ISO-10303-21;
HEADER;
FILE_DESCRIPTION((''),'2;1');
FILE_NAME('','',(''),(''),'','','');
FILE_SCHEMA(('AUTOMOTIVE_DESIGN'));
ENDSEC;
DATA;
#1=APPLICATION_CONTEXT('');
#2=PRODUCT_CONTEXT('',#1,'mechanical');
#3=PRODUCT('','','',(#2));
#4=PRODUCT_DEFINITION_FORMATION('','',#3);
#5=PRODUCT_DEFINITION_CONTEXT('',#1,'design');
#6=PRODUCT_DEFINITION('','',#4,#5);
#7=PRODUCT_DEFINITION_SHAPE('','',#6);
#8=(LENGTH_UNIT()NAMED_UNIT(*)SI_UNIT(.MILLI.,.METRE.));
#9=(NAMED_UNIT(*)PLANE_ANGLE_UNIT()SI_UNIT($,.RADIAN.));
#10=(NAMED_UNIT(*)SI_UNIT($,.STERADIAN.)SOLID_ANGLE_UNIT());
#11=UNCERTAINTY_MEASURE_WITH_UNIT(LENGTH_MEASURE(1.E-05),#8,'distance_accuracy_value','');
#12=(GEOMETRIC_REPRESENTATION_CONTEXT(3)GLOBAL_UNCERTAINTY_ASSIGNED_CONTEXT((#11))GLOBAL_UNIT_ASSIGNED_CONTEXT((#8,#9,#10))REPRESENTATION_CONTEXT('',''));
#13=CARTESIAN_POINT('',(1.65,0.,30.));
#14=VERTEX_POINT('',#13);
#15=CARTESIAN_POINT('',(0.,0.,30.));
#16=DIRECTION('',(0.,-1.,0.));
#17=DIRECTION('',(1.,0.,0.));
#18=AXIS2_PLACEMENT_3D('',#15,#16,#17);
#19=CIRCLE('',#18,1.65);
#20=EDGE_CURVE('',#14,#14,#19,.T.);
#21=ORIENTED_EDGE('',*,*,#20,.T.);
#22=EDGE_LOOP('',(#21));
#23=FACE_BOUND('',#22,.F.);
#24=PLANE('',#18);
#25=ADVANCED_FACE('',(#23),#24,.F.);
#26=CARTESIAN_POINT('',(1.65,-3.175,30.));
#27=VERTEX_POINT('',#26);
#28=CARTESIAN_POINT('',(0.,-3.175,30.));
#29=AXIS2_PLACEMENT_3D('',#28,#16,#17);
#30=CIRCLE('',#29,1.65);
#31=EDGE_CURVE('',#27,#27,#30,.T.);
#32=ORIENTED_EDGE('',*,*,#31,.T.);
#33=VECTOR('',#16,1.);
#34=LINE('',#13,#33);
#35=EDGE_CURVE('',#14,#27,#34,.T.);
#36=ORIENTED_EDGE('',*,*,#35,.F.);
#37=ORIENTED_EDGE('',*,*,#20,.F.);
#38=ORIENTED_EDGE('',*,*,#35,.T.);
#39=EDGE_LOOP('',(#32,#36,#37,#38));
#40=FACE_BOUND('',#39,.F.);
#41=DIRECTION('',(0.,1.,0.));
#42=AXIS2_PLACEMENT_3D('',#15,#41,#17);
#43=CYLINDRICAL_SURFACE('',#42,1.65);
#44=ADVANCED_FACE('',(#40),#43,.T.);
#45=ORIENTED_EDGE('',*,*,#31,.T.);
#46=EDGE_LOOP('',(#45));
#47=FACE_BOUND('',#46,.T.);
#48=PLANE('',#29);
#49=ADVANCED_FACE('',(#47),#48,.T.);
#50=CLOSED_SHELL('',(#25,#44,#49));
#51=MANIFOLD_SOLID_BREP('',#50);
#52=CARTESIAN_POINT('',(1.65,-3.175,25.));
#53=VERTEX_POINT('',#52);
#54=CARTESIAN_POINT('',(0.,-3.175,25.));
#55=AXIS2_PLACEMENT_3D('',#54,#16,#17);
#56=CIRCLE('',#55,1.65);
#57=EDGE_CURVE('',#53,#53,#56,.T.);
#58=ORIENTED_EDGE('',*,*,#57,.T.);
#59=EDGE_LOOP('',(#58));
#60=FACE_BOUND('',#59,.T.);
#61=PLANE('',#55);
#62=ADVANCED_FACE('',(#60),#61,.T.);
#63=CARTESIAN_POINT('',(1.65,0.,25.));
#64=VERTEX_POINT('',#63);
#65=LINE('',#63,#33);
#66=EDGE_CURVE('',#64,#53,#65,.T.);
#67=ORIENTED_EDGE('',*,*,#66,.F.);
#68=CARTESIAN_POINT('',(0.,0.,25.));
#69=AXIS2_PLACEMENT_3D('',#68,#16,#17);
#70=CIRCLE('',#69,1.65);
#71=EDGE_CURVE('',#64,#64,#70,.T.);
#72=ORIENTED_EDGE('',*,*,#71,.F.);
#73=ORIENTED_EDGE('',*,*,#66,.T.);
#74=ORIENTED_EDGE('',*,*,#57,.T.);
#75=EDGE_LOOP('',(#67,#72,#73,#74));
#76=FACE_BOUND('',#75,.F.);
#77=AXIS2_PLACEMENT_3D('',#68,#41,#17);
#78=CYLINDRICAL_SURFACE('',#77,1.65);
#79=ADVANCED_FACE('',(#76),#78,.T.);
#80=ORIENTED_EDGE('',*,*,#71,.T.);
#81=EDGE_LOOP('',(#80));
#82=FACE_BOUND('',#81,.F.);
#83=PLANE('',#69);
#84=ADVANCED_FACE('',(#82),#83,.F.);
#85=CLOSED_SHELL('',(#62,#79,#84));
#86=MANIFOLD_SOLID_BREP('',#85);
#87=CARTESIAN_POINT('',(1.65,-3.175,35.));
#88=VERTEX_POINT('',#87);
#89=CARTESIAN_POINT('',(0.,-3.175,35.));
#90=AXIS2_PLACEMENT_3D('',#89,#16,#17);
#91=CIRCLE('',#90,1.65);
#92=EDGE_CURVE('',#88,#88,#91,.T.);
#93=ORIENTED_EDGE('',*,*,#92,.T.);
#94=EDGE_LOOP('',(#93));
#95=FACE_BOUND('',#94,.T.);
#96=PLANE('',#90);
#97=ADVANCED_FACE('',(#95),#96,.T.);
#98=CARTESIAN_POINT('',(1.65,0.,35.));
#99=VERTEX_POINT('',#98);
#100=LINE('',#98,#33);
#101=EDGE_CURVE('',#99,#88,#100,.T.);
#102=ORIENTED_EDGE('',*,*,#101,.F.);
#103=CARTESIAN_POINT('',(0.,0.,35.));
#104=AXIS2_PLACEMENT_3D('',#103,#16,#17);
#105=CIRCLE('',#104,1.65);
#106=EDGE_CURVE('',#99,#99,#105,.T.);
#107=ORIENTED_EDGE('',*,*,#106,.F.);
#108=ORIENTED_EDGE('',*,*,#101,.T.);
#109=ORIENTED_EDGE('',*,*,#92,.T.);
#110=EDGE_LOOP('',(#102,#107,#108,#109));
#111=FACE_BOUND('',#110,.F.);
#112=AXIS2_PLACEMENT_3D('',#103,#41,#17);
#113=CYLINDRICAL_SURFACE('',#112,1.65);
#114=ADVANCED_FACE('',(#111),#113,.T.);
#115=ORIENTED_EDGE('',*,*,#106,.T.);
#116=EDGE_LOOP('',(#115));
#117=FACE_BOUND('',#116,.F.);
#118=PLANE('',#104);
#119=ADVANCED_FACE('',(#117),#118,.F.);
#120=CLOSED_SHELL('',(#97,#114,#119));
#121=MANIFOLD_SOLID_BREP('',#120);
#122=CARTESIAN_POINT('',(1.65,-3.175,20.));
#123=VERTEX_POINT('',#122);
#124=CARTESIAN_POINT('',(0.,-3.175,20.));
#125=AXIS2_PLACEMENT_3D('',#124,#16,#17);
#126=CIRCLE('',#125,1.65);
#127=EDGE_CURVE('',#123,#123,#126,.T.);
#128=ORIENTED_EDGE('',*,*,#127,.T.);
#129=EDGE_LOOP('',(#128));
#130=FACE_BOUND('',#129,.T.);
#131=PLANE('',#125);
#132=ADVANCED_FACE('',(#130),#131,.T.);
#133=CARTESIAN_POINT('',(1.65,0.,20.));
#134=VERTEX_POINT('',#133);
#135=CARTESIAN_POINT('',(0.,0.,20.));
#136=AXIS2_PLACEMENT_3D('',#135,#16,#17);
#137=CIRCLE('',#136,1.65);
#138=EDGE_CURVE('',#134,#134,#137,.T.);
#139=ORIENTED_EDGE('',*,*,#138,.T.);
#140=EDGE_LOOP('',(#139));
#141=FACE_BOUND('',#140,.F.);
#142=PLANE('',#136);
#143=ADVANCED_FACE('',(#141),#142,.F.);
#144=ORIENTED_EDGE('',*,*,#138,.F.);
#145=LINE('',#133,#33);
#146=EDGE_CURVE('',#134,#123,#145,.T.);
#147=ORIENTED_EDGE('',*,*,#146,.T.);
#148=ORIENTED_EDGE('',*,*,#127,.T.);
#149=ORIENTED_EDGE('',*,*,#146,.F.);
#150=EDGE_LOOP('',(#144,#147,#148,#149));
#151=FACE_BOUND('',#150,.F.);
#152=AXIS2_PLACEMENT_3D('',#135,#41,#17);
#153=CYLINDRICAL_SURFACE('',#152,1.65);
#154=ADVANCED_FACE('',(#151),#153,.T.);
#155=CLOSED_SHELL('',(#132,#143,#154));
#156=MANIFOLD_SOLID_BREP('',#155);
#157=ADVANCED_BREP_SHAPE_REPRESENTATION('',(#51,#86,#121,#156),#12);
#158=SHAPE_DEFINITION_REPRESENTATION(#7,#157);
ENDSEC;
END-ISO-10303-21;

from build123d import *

# Parameters (mm, degrees)
F0_R     = 1.65
F1_DEPTH = 3.175


# Not quite as in the source:
# - a length typed as a fraction of an inch, garbled in the dataset ("3 / 203.2 mm" for 3/8 in), is restored


with BuildPart() as f1:
    # F0 (on Front) → F1 (new body)
    with BuildSketch(Plane.XZ):
        with Locations((0, 35)):
            Circle(F0_R)
    extrude(amount=F1_DEPTH)


with BuildPart() as f1b:
    # F0 (on Front) → F1, piece 2 (new body)
    with BuildSketch(Plane.XZ):
        with Locations((0, 30)):
            Circle(F0_R)
    extrude(amount=F1_DEPTH)


with BuildPart() as f1c:
    # F0 (on Front) → F1, piece 3 (new body)
    with BuildSketch(Plane.XZ):
        with Locations((0, 25)):
            Circle(F0_R)
    extrude(amount=F1_DEPTH)


with BuildPart() as f1d:
    # F0 (on Front) → F1, piece 4 (new body)
    with BuildSketch(Plane.XZ):
        with Locations((0, 20)):
            Circle(F0_R)
    extrude(amount=F1_DEPTH)


solid = Compound([f1.part, f1b.part, f1c.part, f1d.part])
